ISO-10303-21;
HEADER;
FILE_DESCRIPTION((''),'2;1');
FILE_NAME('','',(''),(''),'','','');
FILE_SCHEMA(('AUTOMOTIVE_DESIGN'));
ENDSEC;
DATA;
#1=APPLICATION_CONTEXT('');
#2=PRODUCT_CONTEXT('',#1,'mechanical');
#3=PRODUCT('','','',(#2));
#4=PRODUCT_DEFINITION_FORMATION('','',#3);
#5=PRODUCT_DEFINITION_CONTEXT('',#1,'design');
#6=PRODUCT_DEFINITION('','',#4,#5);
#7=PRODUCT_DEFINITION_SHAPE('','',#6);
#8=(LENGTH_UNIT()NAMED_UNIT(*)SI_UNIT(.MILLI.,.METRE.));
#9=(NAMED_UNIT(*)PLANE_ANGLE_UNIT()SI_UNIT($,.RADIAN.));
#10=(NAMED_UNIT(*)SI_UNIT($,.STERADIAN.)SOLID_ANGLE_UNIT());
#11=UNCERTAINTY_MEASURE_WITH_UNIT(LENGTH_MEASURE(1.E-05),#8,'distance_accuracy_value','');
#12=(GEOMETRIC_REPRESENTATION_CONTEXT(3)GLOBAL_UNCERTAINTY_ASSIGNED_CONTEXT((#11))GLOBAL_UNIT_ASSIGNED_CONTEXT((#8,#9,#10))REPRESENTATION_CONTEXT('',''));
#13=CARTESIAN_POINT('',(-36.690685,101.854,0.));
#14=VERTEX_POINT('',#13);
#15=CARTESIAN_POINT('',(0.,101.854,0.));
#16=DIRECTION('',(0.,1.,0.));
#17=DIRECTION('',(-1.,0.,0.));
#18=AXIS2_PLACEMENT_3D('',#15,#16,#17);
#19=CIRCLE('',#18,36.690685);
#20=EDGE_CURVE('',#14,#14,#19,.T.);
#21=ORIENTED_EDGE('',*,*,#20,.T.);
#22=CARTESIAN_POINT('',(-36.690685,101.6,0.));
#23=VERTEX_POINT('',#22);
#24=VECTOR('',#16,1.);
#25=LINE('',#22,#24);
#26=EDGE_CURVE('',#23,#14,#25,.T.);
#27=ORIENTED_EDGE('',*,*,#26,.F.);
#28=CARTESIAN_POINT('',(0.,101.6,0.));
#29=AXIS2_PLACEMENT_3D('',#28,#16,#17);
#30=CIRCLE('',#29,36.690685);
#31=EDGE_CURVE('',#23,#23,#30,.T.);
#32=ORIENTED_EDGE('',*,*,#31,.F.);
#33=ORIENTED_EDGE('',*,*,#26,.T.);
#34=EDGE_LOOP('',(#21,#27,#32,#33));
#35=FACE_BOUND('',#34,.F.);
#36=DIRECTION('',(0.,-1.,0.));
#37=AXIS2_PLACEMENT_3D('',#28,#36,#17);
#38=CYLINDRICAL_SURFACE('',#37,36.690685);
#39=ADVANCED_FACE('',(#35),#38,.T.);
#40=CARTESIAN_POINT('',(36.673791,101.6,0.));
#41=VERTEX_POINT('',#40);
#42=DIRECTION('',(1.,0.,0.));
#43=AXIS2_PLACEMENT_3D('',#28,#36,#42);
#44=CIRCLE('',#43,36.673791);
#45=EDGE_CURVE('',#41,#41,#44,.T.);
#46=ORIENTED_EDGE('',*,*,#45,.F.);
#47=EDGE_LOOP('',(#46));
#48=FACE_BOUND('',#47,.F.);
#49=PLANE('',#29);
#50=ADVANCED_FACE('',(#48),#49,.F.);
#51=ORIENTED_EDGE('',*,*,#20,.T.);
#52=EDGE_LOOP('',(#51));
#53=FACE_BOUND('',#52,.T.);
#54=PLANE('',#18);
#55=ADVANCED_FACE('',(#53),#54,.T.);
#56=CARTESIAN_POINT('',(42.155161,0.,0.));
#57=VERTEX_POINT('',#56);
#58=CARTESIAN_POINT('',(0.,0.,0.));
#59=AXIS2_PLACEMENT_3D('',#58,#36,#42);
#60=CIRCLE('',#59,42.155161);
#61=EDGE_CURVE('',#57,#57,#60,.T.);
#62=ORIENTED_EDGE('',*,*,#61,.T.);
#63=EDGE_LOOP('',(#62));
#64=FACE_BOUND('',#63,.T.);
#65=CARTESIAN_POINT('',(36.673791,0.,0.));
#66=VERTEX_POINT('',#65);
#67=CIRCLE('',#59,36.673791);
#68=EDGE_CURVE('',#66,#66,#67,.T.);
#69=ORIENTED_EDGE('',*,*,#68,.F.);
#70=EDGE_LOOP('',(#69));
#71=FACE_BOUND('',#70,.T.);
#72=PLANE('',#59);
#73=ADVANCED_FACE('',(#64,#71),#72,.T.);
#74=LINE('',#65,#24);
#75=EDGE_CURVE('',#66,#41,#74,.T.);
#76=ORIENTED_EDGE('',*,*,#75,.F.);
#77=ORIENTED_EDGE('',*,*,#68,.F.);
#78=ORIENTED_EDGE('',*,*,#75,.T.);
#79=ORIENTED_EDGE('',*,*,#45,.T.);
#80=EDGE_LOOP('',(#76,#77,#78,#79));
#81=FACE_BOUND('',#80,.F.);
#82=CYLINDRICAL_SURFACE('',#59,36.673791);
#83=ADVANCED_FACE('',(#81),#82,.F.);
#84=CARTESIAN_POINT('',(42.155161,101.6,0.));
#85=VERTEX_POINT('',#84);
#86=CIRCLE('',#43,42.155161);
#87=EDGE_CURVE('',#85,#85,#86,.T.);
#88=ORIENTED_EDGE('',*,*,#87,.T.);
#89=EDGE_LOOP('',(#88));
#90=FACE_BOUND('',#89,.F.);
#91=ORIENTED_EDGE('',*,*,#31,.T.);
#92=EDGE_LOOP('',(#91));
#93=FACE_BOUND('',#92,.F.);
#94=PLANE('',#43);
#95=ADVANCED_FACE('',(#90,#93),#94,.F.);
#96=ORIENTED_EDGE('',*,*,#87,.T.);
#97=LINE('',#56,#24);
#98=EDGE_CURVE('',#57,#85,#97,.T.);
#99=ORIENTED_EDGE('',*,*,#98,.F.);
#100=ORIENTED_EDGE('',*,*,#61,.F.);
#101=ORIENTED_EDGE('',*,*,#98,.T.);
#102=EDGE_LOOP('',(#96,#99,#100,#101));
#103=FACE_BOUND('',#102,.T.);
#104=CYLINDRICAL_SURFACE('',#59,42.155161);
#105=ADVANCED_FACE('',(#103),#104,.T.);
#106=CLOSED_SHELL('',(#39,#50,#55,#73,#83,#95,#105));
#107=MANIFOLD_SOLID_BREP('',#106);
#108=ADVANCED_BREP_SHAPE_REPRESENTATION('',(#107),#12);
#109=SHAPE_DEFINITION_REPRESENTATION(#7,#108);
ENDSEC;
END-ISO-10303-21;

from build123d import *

# Parameters (mm, degrees)
F0_R     = 42.1551609163
F0_R_2   = 36.6737913898
F1_DEPTH = 101.6
F2_R     = 36.6906853339
F3_DEPTH = 0.254


# Not quite as in the source:
# - the program builds the solid bodies; features that only make, move or delete a surface that nothing else refers to are left out


with BuildPart() as f1:
    # F0 (on Front) → F1 (new body)
    with BuildSketch(Plane.XZ):
        Circle(F0_R)
        Circle(F0_R_2, mode=Mode.SUBTRACT)
    extrude(amount=-F1_DEPTH)

    # F2 (on face) → F3 (join)
    with BuildSketch(Plane(origin=(0, 101.6, 0), x_dir=(-1, 0, 0), z_dir=(0, 1, 0))):
        Circle(F2_R)
    extrude(amount=F3_DEPTH)


solid = f1.part
